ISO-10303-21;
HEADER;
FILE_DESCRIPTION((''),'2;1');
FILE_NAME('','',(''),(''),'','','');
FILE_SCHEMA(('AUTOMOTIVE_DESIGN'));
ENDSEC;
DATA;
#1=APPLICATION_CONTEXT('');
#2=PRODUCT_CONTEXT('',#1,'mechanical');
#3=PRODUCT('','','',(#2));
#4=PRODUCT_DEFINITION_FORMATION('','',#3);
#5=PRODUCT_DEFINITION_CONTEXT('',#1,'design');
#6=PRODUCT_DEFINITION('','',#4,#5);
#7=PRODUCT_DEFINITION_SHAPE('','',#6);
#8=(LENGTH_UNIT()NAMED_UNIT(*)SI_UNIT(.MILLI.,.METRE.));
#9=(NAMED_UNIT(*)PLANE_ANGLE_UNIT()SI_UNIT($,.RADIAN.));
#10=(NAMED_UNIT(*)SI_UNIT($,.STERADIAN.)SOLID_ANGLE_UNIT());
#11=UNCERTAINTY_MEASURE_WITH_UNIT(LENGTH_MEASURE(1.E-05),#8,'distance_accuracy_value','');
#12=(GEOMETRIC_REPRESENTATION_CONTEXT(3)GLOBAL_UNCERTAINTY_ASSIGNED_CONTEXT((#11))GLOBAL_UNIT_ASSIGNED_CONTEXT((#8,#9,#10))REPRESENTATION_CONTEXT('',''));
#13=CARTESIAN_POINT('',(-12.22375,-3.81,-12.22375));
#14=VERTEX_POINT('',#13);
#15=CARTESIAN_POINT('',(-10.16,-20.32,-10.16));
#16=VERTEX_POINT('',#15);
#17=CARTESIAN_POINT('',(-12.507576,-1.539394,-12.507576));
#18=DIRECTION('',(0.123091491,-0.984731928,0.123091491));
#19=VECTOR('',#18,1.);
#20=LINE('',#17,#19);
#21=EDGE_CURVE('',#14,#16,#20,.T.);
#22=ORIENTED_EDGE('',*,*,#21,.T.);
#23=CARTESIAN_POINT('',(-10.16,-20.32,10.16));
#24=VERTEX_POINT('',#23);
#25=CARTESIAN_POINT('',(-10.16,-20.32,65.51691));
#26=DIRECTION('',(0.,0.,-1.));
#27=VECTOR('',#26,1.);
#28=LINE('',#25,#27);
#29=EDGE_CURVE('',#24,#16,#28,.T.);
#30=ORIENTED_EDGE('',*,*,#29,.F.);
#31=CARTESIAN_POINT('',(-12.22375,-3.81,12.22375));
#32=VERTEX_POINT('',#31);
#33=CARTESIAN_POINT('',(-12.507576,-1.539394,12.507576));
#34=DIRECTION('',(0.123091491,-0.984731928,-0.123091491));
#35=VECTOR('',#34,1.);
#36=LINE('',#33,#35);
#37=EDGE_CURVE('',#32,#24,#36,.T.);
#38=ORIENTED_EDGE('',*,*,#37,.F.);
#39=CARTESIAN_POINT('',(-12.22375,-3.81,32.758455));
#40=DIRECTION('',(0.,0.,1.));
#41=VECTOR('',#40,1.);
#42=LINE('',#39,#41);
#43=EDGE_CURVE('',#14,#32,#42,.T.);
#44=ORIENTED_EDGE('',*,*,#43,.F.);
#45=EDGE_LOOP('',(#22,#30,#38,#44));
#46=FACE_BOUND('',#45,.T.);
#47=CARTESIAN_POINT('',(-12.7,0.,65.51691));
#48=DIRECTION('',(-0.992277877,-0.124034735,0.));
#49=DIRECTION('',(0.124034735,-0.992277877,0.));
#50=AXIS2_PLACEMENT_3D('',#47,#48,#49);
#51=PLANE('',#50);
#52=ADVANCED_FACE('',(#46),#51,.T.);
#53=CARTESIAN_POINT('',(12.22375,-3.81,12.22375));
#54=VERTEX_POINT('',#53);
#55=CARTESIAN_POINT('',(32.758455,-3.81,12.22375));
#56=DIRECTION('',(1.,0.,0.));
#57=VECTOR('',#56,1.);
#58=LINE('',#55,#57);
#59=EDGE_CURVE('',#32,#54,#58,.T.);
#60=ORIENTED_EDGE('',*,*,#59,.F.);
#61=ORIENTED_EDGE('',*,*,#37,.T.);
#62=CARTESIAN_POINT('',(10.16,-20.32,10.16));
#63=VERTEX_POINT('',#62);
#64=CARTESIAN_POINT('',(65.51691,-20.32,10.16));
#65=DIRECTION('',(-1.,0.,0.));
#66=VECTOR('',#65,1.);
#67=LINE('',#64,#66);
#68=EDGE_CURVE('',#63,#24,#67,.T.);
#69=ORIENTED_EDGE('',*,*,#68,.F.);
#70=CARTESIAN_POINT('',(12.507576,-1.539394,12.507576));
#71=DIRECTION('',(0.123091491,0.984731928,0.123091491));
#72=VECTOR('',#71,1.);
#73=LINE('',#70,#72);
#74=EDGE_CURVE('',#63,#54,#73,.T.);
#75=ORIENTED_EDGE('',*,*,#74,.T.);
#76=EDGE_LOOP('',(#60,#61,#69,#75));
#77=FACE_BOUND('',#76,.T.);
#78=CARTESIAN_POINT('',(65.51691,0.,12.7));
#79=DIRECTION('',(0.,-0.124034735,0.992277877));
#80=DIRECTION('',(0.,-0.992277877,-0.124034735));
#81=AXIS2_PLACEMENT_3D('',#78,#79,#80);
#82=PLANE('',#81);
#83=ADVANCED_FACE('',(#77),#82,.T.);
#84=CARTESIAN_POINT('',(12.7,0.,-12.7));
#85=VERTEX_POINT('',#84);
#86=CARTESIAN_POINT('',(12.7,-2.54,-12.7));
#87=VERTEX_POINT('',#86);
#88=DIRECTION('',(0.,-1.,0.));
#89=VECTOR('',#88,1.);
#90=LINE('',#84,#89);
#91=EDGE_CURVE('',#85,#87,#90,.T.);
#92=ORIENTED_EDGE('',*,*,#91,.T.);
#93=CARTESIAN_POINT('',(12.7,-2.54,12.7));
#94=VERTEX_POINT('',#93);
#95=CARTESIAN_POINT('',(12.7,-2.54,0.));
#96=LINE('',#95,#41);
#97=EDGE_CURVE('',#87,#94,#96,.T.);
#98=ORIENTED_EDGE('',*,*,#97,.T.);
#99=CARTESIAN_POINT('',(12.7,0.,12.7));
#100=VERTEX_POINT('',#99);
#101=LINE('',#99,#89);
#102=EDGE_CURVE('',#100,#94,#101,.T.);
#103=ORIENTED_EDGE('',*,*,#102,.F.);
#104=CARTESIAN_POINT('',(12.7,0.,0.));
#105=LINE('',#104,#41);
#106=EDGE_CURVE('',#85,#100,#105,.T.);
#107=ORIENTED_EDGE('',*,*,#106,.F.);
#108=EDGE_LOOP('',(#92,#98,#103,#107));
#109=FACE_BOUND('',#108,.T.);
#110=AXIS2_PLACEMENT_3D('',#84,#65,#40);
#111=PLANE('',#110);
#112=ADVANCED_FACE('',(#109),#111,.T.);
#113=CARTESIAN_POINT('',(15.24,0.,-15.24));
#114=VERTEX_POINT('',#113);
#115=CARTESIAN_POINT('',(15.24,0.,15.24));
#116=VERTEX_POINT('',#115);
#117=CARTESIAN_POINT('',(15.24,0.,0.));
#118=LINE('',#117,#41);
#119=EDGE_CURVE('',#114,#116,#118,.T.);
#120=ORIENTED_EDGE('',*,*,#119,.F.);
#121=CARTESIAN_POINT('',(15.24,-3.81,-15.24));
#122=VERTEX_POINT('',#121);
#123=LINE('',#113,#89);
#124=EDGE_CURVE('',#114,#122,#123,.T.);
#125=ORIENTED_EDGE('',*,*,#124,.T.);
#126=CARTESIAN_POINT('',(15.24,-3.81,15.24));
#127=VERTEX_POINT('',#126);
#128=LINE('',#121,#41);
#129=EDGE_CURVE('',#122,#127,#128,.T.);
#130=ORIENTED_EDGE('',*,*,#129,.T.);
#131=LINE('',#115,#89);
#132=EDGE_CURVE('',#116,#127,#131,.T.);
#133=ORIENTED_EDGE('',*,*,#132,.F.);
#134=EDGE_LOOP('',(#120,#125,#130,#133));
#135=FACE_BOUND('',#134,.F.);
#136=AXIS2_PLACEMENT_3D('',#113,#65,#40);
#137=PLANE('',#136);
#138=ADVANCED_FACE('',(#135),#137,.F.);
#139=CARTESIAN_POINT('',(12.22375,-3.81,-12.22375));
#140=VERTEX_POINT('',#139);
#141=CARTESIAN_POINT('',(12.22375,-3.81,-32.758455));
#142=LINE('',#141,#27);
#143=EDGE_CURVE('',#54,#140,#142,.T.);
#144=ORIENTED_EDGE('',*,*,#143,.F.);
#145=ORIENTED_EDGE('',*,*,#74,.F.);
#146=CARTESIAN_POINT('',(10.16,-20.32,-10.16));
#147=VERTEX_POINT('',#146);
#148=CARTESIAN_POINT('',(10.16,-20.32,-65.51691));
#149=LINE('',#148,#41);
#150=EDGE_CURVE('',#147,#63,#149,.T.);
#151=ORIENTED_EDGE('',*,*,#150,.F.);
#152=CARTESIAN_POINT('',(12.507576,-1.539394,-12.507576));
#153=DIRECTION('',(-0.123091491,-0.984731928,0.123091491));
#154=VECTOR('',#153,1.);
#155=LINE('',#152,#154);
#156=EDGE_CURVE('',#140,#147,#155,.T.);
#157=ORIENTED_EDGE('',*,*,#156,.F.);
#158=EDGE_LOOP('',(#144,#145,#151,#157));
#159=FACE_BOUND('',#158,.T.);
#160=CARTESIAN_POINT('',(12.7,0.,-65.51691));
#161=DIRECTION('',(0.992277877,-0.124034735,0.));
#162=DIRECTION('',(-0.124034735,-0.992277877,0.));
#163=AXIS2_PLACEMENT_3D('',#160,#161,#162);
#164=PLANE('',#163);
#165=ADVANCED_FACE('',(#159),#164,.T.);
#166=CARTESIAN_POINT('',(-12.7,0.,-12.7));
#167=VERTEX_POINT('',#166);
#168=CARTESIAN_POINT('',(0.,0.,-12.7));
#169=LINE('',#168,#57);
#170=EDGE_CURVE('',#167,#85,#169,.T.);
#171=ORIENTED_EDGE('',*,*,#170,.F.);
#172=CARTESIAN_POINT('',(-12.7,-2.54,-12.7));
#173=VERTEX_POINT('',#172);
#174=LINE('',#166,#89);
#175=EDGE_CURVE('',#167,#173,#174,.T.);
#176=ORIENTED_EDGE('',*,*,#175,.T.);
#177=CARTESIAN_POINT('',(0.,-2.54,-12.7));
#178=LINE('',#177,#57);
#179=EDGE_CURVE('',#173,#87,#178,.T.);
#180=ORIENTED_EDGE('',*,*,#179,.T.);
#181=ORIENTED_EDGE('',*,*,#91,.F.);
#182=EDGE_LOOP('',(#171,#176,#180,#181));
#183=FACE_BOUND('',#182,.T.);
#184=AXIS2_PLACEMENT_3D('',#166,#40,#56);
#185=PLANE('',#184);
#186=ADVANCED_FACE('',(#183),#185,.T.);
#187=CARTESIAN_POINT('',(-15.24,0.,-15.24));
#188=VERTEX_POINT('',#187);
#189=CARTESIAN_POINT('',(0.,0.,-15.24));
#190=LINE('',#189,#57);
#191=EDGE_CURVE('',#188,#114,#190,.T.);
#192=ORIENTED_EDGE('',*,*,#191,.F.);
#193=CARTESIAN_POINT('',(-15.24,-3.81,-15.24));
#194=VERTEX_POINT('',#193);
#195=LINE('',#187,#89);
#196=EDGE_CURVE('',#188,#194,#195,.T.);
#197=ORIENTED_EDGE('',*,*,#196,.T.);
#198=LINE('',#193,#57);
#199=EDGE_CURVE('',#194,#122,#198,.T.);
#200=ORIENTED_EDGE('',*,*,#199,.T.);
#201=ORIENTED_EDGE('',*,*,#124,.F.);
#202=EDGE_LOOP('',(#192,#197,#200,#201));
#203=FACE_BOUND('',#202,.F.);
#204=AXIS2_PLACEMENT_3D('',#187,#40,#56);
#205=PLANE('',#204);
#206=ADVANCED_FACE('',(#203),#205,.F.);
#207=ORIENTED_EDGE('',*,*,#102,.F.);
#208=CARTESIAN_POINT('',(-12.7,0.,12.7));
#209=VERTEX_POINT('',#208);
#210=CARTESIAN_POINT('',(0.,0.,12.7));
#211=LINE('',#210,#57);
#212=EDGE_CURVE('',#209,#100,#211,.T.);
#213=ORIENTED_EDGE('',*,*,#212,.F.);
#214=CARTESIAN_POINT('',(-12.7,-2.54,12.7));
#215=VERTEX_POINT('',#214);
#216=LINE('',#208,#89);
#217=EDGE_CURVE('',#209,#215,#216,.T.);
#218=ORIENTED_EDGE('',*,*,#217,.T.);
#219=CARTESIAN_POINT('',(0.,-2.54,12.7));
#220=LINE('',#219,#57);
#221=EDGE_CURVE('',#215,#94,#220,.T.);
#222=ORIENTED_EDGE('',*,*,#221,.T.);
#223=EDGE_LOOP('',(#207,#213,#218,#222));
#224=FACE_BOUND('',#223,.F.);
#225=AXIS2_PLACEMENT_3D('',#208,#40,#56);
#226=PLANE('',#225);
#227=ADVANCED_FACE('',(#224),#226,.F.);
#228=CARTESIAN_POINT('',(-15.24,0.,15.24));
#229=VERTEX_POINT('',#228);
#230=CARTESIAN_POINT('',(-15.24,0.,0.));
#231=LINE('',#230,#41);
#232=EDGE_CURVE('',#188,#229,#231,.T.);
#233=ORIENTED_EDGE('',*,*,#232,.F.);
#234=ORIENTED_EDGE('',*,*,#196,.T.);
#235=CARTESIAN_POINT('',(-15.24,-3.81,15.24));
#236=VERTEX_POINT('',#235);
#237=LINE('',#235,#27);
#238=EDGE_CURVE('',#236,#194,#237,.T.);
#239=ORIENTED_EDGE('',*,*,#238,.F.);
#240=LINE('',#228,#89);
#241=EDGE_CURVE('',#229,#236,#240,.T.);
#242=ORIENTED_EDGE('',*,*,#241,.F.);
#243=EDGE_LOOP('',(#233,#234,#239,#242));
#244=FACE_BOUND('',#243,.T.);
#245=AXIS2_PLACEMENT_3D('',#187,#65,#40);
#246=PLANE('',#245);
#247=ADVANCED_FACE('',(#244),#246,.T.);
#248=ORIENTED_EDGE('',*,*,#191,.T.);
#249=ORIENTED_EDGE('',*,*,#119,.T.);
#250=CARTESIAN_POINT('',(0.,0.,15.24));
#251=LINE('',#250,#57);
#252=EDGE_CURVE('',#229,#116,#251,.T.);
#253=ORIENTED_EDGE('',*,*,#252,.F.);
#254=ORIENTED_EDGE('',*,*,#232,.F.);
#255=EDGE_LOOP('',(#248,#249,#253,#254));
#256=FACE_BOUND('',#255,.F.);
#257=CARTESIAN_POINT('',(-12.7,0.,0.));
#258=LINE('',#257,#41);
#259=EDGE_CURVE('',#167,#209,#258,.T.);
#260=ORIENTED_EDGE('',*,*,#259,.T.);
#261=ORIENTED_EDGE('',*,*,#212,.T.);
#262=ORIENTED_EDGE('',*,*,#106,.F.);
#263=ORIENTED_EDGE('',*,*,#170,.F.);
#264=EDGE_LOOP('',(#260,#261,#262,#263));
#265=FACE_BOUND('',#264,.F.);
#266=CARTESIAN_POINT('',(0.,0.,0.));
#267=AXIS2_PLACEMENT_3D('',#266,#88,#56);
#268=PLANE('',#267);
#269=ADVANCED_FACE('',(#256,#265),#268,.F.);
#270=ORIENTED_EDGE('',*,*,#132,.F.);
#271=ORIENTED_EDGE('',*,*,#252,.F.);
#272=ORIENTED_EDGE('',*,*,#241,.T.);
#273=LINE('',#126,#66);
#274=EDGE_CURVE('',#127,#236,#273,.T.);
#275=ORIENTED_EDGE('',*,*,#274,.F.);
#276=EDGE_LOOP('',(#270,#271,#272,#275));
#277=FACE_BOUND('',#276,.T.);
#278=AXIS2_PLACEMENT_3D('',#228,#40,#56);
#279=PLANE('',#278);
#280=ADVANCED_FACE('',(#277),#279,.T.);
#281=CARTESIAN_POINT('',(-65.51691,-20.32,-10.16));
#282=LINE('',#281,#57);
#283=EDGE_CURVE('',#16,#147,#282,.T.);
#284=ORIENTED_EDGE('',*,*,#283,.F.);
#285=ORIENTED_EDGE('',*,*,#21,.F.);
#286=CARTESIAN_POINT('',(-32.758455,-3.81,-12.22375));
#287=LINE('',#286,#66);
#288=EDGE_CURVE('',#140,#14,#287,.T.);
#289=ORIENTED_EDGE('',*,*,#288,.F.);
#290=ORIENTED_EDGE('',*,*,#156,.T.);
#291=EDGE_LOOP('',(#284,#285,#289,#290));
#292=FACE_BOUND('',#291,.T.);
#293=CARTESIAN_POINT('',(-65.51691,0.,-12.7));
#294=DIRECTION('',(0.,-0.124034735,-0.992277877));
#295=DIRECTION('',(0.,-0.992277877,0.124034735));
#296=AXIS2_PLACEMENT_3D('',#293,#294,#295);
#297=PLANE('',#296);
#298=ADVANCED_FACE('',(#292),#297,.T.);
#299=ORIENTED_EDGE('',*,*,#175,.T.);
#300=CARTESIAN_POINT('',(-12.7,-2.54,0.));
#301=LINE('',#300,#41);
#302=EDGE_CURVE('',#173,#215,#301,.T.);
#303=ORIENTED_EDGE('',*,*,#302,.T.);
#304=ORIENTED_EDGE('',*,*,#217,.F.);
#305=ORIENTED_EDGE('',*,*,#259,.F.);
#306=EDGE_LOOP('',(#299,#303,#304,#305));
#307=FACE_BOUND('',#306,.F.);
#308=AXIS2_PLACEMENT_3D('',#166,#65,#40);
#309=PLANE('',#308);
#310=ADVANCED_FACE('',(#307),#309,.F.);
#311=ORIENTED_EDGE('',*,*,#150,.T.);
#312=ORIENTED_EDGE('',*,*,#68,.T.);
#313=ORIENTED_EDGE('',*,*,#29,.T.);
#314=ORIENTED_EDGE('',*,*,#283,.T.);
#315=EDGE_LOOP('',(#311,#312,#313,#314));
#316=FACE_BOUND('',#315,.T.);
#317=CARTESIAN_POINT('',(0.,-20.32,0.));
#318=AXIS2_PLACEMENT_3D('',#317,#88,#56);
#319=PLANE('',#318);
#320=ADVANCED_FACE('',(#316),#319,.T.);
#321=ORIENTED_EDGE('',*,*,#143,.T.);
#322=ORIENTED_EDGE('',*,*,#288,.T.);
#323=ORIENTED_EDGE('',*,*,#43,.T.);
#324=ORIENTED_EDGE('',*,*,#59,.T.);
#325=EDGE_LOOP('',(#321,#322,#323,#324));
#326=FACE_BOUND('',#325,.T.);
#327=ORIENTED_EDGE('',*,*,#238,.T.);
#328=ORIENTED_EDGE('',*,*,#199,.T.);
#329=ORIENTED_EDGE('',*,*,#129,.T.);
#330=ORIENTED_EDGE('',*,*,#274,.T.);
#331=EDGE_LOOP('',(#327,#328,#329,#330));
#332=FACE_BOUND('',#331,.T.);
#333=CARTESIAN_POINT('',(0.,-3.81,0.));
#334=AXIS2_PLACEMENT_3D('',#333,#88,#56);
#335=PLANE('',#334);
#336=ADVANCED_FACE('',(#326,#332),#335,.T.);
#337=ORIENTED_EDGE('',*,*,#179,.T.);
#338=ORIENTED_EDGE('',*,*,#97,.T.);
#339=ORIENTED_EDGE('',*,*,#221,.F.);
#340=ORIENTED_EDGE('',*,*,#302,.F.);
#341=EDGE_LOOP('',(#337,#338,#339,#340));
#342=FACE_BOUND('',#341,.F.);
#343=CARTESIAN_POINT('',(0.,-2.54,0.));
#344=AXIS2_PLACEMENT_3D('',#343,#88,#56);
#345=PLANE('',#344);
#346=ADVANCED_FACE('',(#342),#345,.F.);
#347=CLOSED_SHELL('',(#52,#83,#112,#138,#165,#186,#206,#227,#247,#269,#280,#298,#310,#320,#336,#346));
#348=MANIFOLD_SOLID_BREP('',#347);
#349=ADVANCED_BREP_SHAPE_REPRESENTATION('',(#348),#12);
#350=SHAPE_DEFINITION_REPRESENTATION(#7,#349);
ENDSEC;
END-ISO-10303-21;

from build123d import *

# Parameters (mm, degrees)
F0_W         = 30.48
F0_H         = 30.48
F0_W_2       = 25.4
F0_H_2       = 25.4
F1_DEPTH     = 3.81
F0_W_3       = 15.24
F0_H_3       = 15.24
F2_DEPTH     = 20.32
F3_DEPTH     = 2.54
F4_T4_DEPTH  = 131.0338200082
F4_T9_DEPTH  = 131.0338200082
F4_T14_DEPTH = 131.0338200082
F4_T19_DEPTH = 131.0338200082


# Not quite as in the source:
# - a fillet or chamfer that OpenCascade refuses, or shapes differently, is made with other operations: its cross-section is extruded or revolved along the edge and cut away or added


with BuildPart() as f1:
    # F0 (on Front) → F1 (new body)
    with BuildSketch(Plane.XZ):
        Rectangle(F0_W, F0_H)
        Rectangle(F0_W_2, F0_H_2, mode=Mode.SUBTRACT)
    extrude(amount=F1_DEPTH)

    # F0 (on Front) → F2 (join)
    with BuildSketch(Plane.XZ):
        Rectangle(F0_W_2, F0_H_2)
        Rectangle(F0_W_3, F0_H_3, mode=Mode.SUBTRACT)
        Rectangle(F0_W_3, F0_H_3)
    extrude(amount=F2_DEPTH)

    # F0 (on Front) → F3 (cut)
    with BuildSketch(Plane.XZ):
        Rectangle(F0_W_2, F0_H_2)
        Rectangle(F0_W_3, F0_H_3, mode=Mode.SUBTRACT)
        Rectangle(F0_W_3, F0_H_3)
    extrude(amount=F3_DEPTH, mode=Mode.SUBTRACT)

    # F4: chamfer of 2.54 x 20.32 on 4 edges, made by hand


with BuildPart() as f4_tool2:
    # F4_s3 → F4_t4 (new body)
    with BuildSketch(Plane.YZ.offset(65.5169100041)):
        Polygon((0, 12.7), (-20.32, 10.16), (-20.32, 12.7), align=None)
    extrude(amount=-F4_T4_DEPTH)

    split(bisect_by=Plane.XZ.offset(3.81), keep=Keep.TOP)


with BuildPart() as f1_1:
    add(f1.part)

    # F4_t1: cut F4_tool2
    add(f4_tool2.part, mode=Mode.SUBTRACT)


with BuildPart() as f4_tool7:
    # F4_s8 → F4_t9 (new body)
    with BuildSketch(Plane.XY.offset(65.5169100041)):
        Polygon((-12.7, 0), (-10.16, -20.32), (-12.7, -20.32), align=None)
    extrude(amount=-F4_T9_DEPTH)

    split(bisect_by=Plane.XZ.offset(3.81), keep=Keep.TOP)


with BuildPart() as f1_2:
    add(f1_1.part)

    # F4_t6: cut F4_tool7
    add(f4_tool7.part, mode=Mode.SUBTRACT)


with BuildPart() as f4_tool12:
    # F4_s13 → F4_t14 (new body)
    with BuildSketch(Plane.YZ.offset(-65.5169100041)):
        Polygon((0, -12.7), (-20.32, -10.16), (-20.32, -12.7), align=None)
    extrude(amount=F4_T14_DEPTH)

    split(bisect_by=Plane.XZ.offset(3.81), keep=Keep.TOP)


with BuildPart() as f1_3:
    add(f1_2.part)

    # F4_t11: cut F4_tool12
    add(f4_tool12.part, mode=Mode.SUBTRACT)


with BuildPart() as f4_tool17:
    # F4_s18 → F4_t19 (new body)
    with BuildSketch(Plane.XY.offset(-65.5169100041)):
        Polygon((12.7, 0), (10.16, -20.32), (12.7, -20.32), align=None)
    extrude(amount=F4_T19_DEPTH)

    split(bisect_by=Plane.XZ.offset(3.81), keep=Keep.TOP)


with BuildPart() as f1_4:
    add(f1_3.part)

    # F4_t16: cut F4_tool17
    add(f4_tool17.part, mode=Mode.SUBTRACT)


solid = f1_4.part
